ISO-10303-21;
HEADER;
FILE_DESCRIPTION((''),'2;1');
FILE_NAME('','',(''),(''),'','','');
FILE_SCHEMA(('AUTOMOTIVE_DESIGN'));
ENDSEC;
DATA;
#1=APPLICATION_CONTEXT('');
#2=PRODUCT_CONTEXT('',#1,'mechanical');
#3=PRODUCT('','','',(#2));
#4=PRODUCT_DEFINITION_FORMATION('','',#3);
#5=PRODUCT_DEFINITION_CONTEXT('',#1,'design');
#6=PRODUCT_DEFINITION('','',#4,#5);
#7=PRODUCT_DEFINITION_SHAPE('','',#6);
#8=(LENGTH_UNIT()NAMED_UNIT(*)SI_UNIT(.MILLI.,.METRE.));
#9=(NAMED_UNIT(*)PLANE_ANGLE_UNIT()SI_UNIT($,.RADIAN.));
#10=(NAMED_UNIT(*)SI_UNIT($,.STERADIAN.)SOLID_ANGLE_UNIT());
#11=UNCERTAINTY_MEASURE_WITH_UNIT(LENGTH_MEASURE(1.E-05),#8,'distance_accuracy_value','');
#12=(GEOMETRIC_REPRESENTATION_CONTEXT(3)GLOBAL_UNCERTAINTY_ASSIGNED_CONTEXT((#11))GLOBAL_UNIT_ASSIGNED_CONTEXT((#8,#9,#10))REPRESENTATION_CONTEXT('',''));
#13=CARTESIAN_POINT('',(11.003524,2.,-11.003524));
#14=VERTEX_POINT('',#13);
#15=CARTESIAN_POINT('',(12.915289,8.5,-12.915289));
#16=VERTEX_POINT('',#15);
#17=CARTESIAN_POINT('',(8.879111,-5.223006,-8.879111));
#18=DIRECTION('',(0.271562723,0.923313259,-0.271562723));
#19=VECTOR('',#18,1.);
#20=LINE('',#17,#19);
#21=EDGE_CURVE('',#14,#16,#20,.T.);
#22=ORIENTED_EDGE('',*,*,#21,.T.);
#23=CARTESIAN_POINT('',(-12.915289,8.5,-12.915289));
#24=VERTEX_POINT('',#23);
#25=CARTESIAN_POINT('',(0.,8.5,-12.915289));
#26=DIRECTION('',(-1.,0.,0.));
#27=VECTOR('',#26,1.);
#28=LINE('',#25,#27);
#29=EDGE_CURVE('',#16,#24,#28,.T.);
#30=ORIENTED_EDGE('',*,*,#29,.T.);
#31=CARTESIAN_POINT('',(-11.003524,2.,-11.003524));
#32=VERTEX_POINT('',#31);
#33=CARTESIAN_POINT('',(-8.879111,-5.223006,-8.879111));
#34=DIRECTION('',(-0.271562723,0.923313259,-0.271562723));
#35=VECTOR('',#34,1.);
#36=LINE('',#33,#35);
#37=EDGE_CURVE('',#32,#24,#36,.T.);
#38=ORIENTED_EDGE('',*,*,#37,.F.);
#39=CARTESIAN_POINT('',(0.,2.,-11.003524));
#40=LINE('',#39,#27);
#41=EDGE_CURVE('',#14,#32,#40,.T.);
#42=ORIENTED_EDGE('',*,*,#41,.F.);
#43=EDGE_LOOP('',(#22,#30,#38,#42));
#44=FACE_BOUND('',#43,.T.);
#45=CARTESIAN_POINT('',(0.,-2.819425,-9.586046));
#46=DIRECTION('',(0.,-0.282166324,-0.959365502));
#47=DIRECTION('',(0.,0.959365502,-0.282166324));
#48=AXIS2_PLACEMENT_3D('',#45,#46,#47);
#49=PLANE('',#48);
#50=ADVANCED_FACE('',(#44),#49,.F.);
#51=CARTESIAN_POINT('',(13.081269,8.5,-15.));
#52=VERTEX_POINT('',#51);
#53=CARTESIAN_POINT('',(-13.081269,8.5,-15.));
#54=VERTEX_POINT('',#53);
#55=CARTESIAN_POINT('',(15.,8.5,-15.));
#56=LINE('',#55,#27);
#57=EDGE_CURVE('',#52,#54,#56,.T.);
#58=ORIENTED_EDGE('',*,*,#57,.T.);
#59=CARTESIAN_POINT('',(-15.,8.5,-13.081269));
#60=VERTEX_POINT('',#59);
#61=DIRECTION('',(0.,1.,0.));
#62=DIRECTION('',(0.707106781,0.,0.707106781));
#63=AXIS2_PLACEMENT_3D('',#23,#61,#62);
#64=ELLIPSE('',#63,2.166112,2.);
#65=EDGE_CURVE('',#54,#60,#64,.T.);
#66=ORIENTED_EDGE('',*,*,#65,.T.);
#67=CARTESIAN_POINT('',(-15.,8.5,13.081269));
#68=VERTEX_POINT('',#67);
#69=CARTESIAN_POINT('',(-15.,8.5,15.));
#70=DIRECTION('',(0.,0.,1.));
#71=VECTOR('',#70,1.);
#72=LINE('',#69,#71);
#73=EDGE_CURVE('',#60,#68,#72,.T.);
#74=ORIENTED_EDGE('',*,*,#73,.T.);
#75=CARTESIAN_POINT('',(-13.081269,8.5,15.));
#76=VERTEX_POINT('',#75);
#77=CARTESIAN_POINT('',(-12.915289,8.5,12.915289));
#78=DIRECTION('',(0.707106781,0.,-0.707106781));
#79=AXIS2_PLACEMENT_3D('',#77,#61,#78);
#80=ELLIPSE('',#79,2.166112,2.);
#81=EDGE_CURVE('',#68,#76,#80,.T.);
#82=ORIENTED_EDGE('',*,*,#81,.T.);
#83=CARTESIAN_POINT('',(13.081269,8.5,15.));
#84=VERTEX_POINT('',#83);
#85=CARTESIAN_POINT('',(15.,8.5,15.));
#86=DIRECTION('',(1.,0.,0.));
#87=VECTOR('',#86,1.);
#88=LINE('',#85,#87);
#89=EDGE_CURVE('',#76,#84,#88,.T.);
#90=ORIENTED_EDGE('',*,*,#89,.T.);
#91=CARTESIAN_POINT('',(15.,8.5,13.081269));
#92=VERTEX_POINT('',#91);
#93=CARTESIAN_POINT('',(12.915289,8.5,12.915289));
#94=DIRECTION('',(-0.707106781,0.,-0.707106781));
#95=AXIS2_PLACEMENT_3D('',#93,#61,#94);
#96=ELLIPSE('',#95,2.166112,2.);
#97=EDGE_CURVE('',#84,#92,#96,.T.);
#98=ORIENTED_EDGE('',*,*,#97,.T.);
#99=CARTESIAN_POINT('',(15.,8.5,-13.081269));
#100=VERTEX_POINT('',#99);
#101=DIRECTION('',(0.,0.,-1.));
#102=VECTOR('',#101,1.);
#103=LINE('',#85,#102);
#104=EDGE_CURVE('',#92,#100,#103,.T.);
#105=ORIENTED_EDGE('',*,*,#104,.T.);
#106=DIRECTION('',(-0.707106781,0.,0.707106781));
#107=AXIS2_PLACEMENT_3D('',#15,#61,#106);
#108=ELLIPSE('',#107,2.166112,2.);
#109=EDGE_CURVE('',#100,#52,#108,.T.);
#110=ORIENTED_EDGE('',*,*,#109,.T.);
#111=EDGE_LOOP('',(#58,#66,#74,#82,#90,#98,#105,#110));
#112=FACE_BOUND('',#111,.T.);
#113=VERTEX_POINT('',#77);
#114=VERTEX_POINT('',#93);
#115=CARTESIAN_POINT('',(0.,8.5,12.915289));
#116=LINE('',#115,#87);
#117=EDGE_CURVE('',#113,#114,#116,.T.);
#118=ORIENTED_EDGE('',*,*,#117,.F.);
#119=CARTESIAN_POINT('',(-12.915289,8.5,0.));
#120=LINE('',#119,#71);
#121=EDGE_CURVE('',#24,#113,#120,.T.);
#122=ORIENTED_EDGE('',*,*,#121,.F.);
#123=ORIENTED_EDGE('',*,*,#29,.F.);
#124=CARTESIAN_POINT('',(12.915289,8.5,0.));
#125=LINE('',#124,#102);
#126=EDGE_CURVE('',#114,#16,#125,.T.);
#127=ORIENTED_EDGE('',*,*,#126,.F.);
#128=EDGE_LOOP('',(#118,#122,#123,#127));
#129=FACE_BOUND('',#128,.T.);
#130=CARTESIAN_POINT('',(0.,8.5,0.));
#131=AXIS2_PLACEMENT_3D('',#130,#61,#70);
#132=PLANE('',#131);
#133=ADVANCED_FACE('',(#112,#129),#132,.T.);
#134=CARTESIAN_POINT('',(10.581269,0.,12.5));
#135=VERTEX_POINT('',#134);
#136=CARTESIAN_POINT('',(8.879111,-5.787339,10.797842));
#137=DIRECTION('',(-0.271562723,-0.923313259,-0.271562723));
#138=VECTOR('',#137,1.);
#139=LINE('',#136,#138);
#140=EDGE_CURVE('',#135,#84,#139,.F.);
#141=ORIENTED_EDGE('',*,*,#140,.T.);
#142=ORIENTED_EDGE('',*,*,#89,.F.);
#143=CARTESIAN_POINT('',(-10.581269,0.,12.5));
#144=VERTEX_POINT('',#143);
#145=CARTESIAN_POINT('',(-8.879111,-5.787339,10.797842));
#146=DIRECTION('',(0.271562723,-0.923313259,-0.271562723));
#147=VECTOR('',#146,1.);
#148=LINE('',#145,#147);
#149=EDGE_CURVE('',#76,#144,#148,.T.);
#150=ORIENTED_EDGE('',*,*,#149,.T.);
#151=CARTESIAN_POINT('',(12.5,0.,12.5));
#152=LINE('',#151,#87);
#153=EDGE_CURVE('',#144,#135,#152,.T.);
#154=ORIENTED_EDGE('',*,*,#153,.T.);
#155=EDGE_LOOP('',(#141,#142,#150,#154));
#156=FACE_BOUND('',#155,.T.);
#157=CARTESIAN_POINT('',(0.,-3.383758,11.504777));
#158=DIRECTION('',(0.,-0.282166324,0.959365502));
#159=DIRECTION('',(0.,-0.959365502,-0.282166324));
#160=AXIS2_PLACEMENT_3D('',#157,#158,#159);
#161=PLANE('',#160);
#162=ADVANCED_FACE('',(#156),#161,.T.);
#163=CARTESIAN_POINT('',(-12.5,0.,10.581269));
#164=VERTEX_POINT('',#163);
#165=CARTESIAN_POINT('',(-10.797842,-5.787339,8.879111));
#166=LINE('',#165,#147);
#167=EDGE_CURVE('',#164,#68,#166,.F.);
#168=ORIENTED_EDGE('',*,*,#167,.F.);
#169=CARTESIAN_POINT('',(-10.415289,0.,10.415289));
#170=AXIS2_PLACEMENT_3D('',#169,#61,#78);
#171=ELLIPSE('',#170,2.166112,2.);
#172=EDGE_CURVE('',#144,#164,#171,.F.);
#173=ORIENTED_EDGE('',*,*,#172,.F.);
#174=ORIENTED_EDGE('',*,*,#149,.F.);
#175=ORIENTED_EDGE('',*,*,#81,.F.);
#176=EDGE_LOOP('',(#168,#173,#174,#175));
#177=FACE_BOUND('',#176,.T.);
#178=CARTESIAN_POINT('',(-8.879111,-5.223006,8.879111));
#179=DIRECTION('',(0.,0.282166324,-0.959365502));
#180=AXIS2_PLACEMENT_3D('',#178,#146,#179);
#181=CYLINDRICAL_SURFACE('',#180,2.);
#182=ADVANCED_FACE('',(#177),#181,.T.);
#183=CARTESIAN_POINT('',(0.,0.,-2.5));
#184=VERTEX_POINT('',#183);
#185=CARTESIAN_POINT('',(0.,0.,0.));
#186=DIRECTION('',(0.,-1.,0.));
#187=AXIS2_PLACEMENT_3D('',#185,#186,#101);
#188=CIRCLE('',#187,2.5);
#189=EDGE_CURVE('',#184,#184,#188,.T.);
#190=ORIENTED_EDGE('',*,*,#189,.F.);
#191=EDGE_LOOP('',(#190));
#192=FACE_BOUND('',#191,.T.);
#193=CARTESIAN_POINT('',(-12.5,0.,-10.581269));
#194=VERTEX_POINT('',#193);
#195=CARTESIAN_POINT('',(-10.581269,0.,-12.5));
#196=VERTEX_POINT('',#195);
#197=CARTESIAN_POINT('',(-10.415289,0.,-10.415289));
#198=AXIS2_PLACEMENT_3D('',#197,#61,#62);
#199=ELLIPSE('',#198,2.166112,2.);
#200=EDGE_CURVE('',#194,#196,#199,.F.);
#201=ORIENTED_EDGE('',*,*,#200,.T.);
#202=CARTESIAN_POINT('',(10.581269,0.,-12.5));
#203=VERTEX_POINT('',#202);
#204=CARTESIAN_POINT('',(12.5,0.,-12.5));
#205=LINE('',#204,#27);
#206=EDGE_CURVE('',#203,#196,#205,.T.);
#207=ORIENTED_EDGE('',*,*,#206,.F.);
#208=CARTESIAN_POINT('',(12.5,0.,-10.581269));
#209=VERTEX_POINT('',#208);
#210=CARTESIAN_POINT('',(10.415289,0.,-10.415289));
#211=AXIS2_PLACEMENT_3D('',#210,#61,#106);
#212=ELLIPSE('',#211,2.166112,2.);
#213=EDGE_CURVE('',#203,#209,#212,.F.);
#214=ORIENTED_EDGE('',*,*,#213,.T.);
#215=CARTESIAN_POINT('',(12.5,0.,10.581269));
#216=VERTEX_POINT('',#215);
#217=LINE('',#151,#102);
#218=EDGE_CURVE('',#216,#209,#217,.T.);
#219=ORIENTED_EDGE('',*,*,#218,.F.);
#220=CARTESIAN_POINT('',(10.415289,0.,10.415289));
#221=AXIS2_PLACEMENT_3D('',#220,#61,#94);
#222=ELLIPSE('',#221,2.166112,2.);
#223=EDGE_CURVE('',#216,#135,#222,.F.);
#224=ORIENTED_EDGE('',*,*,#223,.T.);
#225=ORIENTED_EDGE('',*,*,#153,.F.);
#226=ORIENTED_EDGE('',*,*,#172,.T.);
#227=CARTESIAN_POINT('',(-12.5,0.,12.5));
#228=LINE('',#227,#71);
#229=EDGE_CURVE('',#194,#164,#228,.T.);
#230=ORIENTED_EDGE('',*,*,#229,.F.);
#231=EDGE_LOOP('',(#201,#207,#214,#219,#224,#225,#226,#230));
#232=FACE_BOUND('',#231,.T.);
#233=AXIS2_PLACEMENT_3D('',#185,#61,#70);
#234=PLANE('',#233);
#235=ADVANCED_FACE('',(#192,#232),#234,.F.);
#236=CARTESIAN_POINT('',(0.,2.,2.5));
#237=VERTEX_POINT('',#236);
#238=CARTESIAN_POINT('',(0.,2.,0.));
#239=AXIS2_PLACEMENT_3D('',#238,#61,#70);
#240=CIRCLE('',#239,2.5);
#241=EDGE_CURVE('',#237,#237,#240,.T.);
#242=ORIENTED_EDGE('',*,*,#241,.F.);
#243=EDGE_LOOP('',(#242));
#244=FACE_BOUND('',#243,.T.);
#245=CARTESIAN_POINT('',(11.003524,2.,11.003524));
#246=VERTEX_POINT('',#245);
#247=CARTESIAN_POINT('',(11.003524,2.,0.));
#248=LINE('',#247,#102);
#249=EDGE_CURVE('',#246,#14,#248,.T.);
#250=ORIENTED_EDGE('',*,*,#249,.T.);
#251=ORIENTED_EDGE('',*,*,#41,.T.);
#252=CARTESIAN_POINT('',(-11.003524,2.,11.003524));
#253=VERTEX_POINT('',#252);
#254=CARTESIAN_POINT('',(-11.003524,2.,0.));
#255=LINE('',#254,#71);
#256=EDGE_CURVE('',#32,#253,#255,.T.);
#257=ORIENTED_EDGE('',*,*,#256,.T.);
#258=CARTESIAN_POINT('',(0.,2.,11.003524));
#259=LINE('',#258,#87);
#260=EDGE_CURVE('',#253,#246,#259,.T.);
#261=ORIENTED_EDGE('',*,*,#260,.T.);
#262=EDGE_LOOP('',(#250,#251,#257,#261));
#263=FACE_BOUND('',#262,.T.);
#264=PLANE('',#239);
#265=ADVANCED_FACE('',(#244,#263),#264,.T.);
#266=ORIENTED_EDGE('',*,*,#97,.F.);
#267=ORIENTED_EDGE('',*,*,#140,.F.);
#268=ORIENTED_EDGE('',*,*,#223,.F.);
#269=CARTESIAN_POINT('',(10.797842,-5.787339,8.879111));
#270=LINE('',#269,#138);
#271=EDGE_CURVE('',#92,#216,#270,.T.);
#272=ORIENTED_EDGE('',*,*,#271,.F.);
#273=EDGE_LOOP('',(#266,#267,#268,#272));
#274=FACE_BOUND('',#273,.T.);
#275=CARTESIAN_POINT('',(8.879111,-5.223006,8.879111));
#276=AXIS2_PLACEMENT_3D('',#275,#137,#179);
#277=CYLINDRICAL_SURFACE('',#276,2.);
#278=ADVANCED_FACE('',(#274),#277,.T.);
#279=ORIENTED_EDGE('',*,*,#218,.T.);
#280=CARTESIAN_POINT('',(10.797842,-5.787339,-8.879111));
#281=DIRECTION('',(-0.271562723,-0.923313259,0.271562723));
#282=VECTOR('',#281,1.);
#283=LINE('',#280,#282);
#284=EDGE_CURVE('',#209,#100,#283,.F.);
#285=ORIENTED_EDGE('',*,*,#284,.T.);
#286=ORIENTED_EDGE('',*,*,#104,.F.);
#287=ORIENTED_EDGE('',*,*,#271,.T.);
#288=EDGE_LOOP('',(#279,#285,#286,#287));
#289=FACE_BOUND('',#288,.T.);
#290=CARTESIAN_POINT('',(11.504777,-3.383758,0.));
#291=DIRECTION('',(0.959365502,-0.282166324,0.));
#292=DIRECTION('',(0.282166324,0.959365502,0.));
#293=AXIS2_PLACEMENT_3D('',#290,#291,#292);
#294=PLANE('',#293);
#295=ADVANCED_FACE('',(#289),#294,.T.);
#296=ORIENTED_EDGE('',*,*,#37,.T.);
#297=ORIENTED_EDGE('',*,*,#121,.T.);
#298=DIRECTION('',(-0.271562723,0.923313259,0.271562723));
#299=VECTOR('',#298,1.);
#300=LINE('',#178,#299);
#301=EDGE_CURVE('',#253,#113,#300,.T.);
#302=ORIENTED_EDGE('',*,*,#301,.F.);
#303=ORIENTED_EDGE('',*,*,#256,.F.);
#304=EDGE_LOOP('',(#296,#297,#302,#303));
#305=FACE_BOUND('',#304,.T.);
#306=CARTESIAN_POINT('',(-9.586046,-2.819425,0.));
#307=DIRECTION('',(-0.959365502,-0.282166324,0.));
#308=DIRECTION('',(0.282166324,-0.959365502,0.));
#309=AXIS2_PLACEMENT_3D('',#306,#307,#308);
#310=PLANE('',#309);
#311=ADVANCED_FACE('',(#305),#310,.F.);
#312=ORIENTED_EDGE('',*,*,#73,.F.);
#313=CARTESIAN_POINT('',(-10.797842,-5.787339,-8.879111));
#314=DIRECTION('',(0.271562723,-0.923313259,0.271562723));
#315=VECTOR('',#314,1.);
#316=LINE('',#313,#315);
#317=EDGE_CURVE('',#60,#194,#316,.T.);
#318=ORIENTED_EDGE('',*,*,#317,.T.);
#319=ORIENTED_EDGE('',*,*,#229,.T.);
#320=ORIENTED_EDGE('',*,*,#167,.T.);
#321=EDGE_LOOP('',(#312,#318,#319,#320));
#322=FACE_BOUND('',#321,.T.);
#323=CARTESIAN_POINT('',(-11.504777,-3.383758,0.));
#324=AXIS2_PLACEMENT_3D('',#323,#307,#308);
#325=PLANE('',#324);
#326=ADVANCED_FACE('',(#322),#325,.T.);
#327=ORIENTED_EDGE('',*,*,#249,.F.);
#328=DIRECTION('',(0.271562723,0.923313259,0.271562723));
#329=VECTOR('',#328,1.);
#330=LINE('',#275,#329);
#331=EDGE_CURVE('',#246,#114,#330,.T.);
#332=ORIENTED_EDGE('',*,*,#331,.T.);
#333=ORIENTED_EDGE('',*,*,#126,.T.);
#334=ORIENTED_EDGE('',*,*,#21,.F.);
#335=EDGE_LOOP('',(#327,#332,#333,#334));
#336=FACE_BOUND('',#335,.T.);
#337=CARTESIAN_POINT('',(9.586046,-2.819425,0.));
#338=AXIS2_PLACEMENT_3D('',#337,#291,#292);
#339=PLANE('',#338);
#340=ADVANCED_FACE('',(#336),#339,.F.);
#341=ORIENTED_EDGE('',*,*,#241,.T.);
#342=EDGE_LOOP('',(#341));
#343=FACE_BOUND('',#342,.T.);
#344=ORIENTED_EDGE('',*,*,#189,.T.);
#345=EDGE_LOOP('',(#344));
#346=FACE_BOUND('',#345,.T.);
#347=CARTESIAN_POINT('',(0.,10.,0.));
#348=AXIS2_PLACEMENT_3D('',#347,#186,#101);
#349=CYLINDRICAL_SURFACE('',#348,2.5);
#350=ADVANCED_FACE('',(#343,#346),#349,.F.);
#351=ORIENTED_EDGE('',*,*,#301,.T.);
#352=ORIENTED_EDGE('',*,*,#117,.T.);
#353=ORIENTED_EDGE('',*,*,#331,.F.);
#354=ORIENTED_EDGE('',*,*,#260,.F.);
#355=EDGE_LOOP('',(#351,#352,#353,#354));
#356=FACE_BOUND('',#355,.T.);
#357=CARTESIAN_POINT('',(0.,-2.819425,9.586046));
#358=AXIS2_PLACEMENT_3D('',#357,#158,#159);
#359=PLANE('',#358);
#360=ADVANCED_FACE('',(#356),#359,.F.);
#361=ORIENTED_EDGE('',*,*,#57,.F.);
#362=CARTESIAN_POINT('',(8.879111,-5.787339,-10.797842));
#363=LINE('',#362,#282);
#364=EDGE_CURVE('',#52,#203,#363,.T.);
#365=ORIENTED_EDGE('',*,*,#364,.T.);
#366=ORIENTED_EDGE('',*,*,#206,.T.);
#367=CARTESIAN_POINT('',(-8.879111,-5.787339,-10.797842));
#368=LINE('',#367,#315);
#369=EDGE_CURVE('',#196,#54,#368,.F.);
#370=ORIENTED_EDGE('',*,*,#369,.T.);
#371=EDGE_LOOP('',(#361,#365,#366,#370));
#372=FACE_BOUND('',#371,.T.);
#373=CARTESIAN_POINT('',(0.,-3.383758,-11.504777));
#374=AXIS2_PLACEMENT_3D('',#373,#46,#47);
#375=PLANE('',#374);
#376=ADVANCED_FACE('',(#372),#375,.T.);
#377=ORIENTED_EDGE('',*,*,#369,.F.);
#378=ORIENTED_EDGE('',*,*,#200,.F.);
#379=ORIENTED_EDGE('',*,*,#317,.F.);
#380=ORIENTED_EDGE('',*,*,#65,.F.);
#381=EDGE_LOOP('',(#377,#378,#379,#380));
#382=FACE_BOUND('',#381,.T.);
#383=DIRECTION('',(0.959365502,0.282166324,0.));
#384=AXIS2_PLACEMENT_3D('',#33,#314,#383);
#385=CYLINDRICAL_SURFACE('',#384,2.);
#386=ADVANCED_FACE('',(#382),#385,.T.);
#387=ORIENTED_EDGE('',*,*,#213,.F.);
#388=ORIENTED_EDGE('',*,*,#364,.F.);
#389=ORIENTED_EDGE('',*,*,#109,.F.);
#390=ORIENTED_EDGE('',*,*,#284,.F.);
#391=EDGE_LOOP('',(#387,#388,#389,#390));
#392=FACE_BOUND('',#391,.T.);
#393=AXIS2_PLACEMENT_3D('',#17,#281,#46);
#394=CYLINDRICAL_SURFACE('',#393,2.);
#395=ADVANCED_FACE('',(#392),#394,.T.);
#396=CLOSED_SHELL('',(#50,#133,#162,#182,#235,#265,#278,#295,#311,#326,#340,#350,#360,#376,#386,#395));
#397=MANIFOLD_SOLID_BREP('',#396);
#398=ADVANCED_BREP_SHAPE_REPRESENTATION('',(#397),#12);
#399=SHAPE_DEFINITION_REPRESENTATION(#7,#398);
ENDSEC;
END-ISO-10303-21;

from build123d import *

# Parameters (mm, degrees)
FILLET1_R          = 2
SHELL2_OUTLINE_W   = 22.0070482
SHELL2_OUTLINE_H   = 22.0070482
SHELL2_DEPTH       = 6.5
SHELL2_DRAFT       = -16.3895403
SKETCH5_R          = 2.5
CUT_EXTRUDE1_DEPTH = 10


with BuildPart() as part:
    # Sketch3 → Loft1 section 0
    with BuildSketch(Plane(origin=(0, 8.5, 0), x_dir=(1, 0, 0), z_dir=(0, 1, 0))):
        with BuildLine():
            Line((15, -15), (-15, -15))
            Line((-15, -15), (-15, 15))
            Line((-15, 15), (15, 15))
            Line((15, 15), (15, -15))
        make_face()
    # Sketch2 → Loft1 section 1
    with BuildSketch(Plane(origin=(0, 0, 0), x_dir=(1, 0, 0), z_dir=(0, 1, 0))):
        with BuildLine():
            Line((12.5, -12.5), (-12.5, -12.5))
            Line((-12.5, -12.5), (-12.5, 12.5))
            Line((-12.5, 12.5), (12.5, 12.5))
            Line((12.5, 12.5), (12.5, -12.5))
        make_face()
    loft()

    # Fillet1
    fillet1_edges = [part.edges().sort_by_distance(p)[0] for p in [
        (13.75, 4.25, -13.75),
        (-13.75, 4.25, -13.75),
        (-13.75, 4.25, 13.75),
        (13.75, 4.25, 13.75),
    ]]
    fillet(fillet1_edges, radius=FILLET1_R)


with BuildPart() as shell2_tool:
    # Shell2: read off the stored shape, not the designer's step
    # Shell2 outline → Shell2 (with draft: the straight prism first)
    with BuildSketch(Plane(origin=(0, 2, 0), x_dir=(1, 0, 0), z_dir=(0, 1, 0))):
        Rectangle(SHELL2_OUTLINE_W, SHELL2_OUTLINE_H)
    extrude(amount=SHELL2_DEPTH)
    # Shell2: the draft: its side faces are tilted about the plane it starts from
    shell2_sides = [shell2_tool.faces().sort_by_distance(p)[0] for p in [
        (0, 5.25, -11.0035241),
        (-11.0035241, 5.25, 0),
        (0, 5.25, 11.0035241),
        (11.0035241, 5.25, 0),
    ]]
    draft(shell2_sides, Plane(origin=(0, 2, 0), x_dir=(1, 0, 0), z_dir=(0, 1, 0)), SHELL2_DRAFT)


with BuildPart() as part_1:
    add(part.part)

    # Shell2: cut by shell2_tool
    add(shell2_tool.part, mode=Mode.SUBTRACT)

    # Sketch5 → Cut-Extrude1 (cut)
    with BuildSketch(Plane.XZ):
        with Locations(Location((0, 0, 0), (0, 0, 270))):
            Circle(SKETCH5_R)
    extrude(amount=-CUT_EXTRUDE1_DEPTH, mode=Mode.SUBTRACT)


solid = part_1.part
